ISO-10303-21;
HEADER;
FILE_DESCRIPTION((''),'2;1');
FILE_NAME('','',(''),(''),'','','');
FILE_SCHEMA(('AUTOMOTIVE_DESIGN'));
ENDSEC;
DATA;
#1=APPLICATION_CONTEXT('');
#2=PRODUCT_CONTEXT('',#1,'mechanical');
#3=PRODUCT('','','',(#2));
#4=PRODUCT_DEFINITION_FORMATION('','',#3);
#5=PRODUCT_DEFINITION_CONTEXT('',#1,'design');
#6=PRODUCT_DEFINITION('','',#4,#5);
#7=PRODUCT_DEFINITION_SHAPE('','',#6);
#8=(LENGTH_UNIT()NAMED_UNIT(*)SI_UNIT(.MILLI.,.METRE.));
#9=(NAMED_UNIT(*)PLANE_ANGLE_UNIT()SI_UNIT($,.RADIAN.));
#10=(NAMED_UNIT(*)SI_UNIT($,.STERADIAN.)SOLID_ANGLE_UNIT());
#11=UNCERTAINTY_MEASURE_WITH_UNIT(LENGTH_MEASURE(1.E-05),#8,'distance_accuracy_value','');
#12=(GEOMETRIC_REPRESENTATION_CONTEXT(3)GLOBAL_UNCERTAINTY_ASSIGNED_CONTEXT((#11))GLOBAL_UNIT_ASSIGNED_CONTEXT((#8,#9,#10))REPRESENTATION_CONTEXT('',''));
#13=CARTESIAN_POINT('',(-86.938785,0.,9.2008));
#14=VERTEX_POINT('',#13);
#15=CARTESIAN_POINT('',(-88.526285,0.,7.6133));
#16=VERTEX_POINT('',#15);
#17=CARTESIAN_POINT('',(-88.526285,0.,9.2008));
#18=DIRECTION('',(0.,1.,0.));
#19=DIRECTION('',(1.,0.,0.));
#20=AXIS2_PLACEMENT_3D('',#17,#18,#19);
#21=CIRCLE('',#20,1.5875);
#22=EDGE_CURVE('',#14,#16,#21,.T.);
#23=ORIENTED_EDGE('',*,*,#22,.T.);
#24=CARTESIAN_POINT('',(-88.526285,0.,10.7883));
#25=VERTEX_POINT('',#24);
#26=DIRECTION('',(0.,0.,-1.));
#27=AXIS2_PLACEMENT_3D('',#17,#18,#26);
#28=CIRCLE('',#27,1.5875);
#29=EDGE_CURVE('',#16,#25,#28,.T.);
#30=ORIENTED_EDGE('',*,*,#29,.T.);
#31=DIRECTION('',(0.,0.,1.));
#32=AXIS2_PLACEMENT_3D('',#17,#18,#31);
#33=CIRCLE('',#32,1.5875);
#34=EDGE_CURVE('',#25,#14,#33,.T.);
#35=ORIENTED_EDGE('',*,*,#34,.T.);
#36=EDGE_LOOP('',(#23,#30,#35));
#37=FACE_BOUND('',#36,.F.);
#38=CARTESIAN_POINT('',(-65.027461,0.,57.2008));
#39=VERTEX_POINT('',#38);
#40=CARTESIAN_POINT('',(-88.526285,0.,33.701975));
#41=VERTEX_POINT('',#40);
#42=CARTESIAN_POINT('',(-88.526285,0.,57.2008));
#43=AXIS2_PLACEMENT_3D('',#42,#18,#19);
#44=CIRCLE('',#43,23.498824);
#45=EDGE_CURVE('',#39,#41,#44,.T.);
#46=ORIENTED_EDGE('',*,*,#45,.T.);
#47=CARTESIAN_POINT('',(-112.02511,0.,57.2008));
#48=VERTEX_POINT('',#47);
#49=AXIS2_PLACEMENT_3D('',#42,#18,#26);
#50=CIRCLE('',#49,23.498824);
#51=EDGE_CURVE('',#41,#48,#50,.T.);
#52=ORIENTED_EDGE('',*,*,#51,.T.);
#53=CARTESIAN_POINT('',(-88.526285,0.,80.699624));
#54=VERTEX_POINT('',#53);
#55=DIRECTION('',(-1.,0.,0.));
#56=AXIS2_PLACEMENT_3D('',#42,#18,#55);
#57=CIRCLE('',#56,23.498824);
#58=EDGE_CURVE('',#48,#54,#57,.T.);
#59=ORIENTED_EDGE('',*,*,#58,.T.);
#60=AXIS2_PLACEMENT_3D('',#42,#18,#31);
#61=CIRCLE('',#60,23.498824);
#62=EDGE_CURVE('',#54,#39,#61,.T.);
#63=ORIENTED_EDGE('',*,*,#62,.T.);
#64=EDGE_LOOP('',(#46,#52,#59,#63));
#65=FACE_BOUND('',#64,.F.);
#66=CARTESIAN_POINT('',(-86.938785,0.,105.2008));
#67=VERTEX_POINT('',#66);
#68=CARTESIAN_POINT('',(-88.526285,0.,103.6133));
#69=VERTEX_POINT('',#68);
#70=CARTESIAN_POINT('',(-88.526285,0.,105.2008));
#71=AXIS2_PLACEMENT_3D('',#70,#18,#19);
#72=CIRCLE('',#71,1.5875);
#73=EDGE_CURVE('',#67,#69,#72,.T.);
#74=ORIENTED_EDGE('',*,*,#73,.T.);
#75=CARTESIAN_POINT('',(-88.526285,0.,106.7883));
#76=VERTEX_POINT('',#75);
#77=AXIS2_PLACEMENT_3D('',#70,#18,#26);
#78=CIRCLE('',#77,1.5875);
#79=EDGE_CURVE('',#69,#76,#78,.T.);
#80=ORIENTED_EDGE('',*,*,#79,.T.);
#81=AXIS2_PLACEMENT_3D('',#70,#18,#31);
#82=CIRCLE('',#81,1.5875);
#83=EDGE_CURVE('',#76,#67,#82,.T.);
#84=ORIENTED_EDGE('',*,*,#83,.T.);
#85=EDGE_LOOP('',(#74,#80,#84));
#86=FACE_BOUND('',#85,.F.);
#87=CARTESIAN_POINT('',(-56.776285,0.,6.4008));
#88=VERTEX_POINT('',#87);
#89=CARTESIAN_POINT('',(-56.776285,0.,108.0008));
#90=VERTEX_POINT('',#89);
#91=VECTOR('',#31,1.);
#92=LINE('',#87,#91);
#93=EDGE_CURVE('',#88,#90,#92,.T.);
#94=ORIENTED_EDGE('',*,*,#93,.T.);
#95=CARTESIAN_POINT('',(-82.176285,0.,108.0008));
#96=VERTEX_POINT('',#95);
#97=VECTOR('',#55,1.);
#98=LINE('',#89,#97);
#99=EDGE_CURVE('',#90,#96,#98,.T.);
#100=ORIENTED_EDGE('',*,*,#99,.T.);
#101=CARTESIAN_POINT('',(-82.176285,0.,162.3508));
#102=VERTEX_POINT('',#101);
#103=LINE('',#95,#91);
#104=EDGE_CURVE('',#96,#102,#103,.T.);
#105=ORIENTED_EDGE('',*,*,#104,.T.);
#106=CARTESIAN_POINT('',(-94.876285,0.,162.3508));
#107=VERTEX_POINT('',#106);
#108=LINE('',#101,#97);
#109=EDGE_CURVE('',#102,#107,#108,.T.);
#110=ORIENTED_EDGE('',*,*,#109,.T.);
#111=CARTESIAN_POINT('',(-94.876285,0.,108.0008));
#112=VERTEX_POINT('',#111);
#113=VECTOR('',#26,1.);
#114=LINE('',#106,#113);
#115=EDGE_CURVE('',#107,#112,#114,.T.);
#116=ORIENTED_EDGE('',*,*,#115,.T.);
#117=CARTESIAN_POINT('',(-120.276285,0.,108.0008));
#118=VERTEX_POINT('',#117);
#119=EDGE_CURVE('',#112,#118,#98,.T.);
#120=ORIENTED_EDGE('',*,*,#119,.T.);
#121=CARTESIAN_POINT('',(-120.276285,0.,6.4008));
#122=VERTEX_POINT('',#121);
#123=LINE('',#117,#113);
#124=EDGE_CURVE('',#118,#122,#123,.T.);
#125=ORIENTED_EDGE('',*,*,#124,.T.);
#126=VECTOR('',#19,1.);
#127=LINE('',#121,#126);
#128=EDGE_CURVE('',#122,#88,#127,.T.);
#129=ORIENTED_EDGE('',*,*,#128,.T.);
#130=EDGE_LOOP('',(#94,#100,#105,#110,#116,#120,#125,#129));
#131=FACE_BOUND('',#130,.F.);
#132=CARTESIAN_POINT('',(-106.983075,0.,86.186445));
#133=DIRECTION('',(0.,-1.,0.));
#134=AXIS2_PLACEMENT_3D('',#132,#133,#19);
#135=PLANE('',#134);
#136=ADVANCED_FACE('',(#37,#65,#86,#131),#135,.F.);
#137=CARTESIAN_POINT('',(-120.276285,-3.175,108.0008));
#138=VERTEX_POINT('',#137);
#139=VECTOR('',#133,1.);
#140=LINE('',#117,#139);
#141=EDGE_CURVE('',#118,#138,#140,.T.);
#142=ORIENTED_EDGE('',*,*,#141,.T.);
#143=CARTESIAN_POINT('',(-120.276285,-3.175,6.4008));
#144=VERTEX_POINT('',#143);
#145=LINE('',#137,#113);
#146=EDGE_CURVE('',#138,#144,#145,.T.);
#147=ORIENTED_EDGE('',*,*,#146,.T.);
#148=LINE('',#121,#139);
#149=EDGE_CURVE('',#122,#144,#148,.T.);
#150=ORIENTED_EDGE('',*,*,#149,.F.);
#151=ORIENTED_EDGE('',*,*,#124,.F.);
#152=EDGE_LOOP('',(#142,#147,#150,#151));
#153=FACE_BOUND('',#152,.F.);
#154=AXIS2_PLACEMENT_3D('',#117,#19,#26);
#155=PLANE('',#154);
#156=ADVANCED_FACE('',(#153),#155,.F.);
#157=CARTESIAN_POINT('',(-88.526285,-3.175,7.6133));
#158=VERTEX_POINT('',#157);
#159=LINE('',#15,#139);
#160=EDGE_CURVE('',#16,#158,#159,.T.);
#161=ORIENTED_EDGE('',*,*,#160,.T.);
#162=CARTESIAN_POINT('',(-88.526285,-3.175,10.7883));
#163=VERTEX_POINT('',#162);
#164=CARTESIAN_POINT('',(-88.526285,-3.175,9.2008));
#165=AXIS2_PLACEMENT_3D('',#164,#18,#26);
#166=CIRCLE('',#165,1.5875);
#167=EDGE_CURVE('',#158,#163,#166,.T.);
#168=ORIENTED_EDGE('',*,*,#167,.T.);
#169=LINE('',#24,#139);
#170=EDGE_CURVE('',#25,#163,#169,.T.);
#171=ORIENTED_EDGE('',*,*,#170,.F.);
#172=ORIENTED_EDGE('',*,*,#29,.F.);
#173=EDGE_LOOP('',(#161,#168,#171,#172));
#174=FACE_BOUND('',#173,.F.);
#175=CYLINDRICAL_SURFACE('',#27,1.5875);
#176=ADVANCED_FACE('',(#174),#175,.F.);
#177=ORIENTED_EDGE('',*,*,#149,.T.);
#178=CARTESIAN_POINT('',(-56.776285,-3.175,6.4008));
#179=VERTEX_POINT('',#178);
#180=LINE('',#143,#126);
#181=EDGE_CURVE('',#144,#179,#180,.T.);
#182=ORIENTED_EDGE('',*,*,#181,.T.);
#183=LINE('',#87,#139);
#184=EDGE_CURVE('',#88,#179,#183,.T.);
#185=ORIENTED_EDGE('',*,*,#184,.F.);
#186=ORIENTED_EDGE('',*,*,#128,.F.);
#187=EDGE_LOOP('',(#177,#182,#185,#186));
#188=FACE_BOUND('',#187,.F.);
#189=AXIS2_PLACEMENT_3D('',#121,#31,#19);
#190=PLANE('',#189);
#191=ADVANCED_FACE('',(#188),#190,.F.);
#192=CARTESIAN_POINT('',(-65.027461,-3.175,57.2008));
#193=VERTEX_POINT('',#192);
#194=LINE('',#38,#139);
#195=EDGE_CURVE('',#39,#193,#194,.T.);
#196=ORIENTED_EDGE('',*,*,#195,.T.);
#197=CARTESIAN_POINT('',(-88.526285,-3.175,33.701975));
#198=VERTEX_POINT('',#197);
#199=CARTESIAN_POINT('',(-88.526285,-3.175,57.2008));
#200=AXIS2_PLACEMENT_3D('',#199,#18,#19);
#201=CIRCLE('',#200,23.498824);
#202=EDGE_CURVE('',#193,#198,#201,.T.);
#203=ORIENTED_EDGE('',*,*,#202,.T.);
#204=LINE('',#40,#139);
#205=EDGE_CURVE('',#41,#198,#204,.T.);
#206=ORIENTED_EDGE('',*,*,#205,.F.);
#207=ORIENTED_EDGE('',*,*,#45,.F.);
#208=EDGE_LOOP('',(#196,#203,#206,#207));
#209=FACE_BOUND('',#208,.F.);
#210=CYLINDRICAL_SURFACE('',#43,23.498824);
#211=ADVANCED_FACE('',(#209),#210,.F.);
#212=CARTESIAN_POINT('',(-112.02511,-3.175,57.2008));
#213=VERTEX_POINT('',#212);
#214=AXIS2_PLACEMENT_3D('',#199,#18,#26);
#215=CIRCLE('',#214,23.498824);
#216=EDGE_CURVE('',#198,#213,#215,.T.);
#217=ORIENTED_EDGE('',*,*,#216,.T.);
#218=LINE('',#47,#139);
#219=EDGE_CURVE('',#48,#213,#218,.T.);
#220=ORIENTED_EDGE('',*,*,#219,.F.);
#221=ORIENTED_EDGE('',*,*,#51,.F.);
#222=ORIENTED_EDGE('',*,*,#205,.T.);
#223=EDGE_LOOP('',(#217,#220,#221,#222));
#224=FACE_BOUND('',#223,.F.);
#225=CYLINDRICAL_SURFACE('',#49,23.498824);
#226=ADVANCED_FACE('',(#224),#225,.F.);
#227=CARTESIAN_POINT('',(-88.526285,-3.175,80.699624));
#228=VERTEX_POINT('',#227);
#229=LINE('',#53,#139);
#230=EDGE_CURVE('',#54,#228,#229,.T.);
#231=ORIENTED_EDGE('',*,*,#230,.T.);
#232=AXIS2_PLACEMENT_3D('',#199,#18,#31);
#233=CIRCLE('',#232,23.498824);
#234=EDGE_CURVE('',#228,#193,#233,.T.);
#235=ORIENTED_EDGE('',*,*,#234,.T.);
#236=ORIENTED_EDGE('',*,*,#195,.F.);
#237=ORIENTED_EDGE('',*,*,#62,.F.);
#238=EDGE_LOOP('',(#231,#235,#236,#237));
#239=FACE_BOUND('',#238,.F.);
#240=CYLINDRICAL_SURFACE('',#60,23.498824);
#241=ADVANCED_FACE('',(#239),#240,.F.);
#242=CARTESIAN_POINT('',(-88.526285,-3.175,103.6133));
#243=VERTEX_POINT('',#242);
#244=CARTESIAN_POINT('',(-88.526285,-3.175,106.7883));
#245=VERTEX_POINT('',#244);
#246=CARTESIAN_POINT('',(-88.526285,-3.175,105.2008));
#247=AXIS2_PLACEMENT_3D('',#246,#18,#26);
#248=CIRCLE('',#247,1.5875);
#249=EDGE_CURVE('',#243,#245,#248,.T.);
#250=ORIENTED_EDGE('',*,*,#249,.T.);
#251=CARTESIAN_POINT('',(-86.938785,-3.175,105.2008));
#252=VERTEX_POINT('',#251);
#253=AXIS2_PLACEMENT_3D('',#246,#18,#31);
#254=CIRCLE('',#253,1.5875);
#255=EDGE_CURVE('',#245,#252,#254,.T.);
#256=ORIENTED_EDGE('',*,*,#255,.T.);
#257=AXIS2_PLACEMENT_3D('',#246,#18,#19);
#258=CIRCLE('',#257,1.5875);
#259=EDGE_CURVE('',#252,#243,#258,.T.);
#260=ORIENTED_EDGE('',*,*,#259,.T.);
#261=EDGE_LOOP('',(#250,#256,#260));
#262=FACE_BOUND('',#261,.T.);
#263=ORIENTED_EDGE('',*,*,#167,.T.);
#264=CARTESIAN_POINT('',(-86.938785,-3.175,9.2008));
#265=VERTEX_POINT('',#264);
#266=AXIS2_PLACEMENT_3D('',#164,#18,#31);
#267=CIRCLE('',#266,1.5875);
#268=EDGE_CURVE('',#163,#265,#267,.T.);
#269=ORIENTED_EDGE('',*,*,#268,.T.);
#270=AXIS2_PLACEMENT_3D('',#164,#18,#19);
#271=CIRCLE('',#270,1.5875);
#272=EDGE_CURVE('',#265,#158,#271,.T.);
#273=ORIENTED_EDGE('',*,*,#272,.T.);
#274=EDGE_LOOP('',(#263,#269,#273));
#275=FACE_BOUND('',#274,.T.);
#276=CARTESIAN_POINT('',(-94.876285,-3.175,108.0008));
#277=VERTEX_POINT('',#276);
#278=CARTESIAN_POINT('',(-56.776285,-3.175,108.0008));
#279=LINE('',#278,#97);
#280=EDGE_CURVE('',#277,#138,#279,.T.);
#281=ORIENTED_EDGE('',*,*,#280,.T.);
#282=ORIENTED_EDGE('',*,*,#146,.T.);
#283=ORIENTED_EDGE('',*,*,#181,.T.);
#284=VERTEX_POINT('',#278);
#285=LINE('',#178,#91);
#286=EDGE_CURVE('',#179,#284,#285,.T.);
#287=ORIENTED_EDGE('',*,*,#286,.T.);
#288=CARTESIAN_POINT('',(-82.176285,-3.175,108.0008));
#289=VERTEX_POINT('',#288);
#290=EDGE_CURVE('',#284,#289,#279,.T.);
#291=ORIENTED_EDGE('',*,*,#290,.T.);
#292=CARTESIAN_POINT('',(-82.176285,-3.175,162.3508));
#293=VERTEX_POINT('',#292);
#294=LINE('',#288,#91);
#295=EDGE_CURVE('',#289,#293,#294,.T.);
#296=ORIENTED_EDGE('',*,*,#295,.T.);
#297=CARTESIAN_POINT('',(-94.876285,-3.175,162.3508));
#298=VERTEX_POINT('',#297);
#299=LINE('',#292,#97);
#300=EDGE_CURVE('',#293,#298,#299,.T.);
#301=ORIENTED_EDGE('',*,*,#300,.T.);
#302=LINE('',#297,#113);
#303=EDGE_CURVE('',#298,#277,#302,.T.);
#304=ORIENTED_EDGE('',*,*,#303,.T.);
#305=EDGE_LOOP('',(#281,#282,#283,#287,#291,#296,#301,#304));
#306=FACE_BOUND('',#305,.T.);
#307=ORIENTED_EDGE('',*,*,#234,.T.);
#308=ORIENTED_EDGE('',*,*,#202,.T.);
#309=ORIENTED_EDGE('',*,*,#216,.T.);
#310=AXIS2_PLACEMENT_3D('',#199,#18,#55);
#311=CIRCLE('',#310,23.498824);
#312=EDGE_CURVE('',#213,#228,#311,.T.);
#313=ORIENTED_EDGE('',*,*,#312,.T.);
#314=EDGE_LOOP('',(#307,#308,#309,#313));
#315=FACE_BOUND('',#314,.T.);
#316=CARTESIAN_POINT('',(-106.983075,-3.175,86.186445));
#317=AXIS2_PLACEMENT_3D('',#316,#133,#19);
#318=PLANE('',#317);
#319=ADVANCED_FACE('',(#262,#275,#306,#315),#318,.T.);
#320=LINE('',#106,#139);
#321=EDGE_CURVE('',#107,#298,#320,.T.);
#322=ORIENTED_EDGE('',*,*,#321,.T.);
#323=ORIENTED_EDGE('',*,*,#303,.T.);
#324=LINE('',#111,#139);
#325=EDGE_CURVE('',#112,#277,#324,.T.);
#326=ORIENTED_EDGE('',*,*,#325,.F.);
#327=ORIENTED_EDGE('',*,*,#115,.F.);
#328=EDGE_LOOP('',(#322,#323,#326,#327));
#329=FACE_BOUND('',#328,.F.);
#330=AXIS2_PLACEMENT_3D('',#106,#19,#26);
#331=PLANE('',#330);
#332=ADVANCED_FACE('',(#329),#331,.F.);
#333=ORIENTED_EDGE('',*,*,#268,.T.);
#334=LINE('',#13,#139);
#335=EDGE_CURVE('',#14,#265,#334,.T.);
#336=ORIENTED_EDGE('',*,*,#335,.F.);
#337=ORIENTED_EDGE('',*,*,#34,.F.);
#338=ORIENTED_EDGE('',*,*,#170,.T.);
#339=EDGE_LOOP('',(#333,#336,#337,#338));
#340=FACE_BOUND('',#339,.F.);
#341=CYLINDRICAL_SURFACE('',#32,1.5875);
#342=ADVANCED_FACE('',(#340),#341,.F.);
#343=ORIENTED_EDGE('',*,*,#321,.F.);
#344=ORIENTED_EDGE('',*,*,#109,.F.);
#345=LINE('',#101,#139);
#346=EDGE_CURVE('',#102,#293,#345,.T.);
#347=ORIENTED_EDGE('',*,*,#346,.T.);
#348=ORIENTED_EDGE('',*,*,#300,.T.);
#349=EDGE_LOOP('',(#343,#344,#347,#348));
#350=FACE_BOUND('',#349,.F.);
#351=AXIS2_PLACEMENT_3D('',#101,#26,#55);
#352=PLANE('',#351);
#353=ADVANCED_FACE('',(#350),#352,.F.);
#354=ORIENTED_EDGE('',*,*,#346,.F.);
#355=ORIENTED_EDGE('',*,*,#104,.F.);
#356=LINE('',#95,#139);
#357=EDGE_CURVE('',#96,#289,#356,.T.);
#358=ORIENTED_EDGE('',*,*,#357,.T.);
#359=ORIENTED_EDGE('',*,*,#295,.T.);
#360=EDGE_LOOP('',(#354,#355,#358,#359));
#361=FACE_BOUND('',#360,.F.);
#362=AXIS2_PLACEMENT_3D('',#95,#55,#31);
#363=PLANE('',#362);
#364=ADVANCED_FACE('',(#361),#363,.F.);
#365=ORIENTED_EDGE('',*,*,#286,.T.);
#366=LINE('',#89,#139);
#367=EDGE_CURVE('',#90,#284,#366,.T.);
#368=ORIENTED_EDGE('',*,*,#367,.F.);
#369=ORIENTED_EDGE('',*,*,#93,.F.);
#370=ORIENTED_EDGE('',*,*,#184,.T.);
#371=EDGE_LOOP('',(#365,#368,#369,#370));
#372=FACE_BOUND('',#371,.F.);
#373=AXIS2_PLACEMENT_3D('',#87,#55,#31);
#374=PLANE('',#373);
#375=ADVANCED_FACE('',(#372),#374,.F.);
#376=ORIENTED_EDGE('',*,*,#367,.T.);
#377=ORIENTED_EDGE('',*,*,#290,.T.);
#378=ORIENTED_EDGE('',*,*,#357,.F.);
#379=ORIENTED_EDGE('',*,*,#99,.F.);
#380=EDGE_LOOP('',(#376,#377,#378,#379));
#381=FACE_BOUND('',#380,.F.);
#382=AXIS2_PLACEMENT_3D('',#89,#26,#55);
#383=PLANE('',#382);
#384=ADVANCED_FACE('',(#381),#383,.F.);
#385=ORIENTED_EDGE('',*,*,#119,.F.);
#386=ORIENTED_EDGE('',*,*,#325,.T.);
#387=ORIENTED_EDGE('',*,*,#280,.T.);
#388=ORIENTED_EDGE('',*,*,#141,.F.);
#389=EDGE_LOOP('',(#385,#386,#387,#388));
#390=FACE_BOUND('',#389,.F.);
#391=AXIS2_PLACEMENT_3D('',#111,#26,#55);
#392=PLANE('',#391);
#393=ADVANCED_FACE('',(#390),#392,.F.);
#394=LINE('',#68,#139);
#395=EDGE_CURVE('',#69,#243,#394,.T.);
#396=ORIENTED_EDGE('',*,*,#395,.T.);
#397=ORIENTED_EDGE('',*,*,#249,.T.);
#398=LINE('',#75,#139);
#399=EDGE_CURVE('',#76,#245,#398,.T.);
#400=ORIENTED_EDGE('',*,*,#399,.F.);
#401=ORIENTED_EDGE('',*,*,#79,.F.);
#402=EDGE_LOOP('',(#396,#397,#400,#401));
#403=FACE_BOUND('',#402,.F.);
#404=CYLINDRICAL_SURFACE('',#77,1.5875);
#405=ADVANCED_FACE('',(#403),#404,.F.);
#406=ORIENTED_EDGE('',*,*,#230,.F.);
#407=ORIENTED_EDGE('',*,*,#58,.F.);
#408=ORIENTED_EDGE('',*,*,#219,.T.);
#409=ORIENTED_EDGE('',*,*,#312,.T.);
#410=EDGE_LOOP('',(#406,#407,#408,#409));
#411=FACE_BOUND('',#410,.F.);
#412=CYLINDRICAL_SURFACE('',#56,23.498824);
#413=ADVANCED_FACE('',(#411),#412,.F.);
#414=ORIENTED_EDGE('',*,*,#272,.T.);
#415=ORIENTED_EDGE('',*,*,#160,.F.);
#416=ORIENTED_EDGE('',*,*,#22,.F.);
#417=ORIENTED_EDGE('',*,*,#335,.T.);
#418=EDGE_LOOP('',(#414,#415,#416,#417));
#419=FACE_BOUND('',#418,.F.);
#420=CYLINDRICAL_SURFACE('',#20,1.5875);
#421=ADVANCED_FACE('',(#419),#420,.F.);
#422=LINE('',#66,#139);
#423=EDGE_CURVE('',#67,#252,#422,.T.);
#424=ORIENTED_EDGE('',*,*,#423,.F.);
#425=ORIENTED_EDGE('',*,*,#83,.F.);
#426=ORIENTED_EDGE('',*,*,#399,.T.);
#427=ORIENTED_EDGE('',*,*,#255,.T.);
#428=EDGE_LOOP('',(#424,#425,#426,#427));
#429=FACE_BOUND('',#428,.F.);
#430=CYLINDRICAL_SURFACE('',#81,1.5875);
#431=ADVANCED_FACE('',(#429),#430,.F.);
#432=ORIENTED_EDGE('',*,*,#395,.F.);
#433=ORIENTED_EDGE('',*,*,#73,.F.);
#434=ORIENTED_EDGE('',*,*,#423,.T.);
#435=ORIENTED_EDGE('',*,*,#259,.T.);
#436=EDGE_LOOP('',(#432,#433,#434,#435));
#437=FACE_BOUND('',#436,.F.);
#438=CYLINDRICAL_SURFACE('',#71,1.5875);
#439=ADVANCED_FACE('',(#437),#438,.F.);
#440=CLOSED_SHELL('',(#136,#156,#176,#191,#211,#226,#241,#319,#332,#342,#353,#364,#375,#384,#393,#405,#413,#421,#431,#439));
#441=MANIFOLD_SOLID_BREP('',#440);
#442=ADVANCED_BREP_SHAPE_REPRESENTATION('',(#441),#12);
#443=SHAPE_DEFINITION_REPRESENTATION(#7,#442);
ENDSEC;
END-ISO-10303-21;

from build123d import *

# Parameters (mm, degrees)
F1_DEPTH = 3.175


# Not quite as in the source:
# - a feature names something its author has since deleted; it is built from what else it names


with BuildPart() as f1:
    # F0 (on Front) → F1 (new body)
    with BuildSketch(Plane.XZ):
        with BuildLine():
            Line((-94.8762850642, 108.0007998444), (-120.2762850642, 108.0007998444))
            Line((-120.2762850642, 108.0007998444), (-120.2762850642, 57.2007998444))
            Line((-120.2762850642, 57.2007998444), (-112.0251095462, 57.2007998444))
            ThreePointArc((-112.0251095462, 57.2007998444), (-105.1424632053, 73.8169779855), (-88.5262850642, 80.6996243264))
            Line((-88.5262850642, 80.6996243264), (-88.5262850642, 103.6132998444))
            ThreePointArc((-88.5262850642, 103.6132998444), (-90.1137850642, 105.2007998444), (-88.5262850642, 106.7882998444))
            Line((-88.5262850642, 106.7882998444), (-88.5262850642, 108.0007998444))
            Line((-88.5262850642, 108.0007998444), (-94.8762850642, 108.0007998444))
        make_face()
        with BuildLine():
            Line((-82.1762850642, 108.0007998444), (-88.5262850642, 108.0007998444))
            Line((-88.5262850642, 108.0007998444), (-88.5262850642, 106.7882998444))
            ThreePointArc((-88.5262850642, 106.7882998444), (-87.4037530491, 106.3233318595), (-86.9387850642, 105.2007998444))
            ThreePointArc((-86.9387850642, 105.2007998444), (-87.4037530491, 104.0782678293), (-88.5262850642, 103.6132998444))
            Line((-88.5262850642, 103.6132998444), (-88.5262850642, 80.6996243264))
            ThreePointArc((-88.5262850642, 80.6996243264), (-71.9101069231, 73.8169779855), (-65.0274605822, 57.2007998444))
            ThreePointArc((-65.0274605822, 57.2007998444), (-71.9101069231, 40.5846217033), (-88.5262850642, 33.7019753624))
            Line((-88.5262850642, 33.7019753624), (-88.5262850642, 10.7882998444))
            ThreePointArc((-88.5262850642, 10.7882998444), (-87.4037530491, 10.3233318595), (-86.9387850642, 9.2007998444))
            ThreePointArc((-86.9387850642, 9.2007998444), (-87.4037530491, 8.0782678293), (-88.5262850642, 7.6132998444))
            Line((-88.5262850642, 7.6132998444), (-88.5262850642, 6.4007998444))
            Line((-88.5262850642, 6.4007998444), (-56.7762850642, 6.4007998444))
            Line((-56.7762850642, 6.4007998444), (-56.7762850642, 108.0007998444))
            Line((-56.7762850642, 108.0007998444), (-82.1762850642, 108.0007998444))
        make_face()
        with BuildLine():
            Line((-112.0251095462, 57.2007998444), (-120.2762850642, 57.2007998444))
            Line((-120.2762850642, 57.2007998444), (-120.2762850642, 6.4007998444))
            Line((-120.2762850642, 6.4007998444), (-88.5262850642, 6.4007998444))
            Line((-88.5262850642, 6.4007998444), (-88.5262850642, 7.6132998444))
            ThreePointArc((-88.5262850642, 7.6132998444), (-90.1137850642, 9.2007998444), (-88.5262850642, 10.7882998444))
            Line((-88.5262850642, 10.7882998444), (-88.5262850642, 33.7019753624))
            ThreePointArc((-88.5262850642, 33.7019753624), (-105.1424632053, 40.5846217033), (-112.0251095462, 57.2007998444))
        make_face()
        Polygon((-94.8762850642, 162.3507998444), (-94.8762850642, 108.0007998444), (-88.5262850642, 108.0007998444), (-82.1762850642, 108.0007998444), (-82.1762850642, 162.3507998444), align=None)
    extrude(amount=F1_DEPTH)


solid = f1.part
